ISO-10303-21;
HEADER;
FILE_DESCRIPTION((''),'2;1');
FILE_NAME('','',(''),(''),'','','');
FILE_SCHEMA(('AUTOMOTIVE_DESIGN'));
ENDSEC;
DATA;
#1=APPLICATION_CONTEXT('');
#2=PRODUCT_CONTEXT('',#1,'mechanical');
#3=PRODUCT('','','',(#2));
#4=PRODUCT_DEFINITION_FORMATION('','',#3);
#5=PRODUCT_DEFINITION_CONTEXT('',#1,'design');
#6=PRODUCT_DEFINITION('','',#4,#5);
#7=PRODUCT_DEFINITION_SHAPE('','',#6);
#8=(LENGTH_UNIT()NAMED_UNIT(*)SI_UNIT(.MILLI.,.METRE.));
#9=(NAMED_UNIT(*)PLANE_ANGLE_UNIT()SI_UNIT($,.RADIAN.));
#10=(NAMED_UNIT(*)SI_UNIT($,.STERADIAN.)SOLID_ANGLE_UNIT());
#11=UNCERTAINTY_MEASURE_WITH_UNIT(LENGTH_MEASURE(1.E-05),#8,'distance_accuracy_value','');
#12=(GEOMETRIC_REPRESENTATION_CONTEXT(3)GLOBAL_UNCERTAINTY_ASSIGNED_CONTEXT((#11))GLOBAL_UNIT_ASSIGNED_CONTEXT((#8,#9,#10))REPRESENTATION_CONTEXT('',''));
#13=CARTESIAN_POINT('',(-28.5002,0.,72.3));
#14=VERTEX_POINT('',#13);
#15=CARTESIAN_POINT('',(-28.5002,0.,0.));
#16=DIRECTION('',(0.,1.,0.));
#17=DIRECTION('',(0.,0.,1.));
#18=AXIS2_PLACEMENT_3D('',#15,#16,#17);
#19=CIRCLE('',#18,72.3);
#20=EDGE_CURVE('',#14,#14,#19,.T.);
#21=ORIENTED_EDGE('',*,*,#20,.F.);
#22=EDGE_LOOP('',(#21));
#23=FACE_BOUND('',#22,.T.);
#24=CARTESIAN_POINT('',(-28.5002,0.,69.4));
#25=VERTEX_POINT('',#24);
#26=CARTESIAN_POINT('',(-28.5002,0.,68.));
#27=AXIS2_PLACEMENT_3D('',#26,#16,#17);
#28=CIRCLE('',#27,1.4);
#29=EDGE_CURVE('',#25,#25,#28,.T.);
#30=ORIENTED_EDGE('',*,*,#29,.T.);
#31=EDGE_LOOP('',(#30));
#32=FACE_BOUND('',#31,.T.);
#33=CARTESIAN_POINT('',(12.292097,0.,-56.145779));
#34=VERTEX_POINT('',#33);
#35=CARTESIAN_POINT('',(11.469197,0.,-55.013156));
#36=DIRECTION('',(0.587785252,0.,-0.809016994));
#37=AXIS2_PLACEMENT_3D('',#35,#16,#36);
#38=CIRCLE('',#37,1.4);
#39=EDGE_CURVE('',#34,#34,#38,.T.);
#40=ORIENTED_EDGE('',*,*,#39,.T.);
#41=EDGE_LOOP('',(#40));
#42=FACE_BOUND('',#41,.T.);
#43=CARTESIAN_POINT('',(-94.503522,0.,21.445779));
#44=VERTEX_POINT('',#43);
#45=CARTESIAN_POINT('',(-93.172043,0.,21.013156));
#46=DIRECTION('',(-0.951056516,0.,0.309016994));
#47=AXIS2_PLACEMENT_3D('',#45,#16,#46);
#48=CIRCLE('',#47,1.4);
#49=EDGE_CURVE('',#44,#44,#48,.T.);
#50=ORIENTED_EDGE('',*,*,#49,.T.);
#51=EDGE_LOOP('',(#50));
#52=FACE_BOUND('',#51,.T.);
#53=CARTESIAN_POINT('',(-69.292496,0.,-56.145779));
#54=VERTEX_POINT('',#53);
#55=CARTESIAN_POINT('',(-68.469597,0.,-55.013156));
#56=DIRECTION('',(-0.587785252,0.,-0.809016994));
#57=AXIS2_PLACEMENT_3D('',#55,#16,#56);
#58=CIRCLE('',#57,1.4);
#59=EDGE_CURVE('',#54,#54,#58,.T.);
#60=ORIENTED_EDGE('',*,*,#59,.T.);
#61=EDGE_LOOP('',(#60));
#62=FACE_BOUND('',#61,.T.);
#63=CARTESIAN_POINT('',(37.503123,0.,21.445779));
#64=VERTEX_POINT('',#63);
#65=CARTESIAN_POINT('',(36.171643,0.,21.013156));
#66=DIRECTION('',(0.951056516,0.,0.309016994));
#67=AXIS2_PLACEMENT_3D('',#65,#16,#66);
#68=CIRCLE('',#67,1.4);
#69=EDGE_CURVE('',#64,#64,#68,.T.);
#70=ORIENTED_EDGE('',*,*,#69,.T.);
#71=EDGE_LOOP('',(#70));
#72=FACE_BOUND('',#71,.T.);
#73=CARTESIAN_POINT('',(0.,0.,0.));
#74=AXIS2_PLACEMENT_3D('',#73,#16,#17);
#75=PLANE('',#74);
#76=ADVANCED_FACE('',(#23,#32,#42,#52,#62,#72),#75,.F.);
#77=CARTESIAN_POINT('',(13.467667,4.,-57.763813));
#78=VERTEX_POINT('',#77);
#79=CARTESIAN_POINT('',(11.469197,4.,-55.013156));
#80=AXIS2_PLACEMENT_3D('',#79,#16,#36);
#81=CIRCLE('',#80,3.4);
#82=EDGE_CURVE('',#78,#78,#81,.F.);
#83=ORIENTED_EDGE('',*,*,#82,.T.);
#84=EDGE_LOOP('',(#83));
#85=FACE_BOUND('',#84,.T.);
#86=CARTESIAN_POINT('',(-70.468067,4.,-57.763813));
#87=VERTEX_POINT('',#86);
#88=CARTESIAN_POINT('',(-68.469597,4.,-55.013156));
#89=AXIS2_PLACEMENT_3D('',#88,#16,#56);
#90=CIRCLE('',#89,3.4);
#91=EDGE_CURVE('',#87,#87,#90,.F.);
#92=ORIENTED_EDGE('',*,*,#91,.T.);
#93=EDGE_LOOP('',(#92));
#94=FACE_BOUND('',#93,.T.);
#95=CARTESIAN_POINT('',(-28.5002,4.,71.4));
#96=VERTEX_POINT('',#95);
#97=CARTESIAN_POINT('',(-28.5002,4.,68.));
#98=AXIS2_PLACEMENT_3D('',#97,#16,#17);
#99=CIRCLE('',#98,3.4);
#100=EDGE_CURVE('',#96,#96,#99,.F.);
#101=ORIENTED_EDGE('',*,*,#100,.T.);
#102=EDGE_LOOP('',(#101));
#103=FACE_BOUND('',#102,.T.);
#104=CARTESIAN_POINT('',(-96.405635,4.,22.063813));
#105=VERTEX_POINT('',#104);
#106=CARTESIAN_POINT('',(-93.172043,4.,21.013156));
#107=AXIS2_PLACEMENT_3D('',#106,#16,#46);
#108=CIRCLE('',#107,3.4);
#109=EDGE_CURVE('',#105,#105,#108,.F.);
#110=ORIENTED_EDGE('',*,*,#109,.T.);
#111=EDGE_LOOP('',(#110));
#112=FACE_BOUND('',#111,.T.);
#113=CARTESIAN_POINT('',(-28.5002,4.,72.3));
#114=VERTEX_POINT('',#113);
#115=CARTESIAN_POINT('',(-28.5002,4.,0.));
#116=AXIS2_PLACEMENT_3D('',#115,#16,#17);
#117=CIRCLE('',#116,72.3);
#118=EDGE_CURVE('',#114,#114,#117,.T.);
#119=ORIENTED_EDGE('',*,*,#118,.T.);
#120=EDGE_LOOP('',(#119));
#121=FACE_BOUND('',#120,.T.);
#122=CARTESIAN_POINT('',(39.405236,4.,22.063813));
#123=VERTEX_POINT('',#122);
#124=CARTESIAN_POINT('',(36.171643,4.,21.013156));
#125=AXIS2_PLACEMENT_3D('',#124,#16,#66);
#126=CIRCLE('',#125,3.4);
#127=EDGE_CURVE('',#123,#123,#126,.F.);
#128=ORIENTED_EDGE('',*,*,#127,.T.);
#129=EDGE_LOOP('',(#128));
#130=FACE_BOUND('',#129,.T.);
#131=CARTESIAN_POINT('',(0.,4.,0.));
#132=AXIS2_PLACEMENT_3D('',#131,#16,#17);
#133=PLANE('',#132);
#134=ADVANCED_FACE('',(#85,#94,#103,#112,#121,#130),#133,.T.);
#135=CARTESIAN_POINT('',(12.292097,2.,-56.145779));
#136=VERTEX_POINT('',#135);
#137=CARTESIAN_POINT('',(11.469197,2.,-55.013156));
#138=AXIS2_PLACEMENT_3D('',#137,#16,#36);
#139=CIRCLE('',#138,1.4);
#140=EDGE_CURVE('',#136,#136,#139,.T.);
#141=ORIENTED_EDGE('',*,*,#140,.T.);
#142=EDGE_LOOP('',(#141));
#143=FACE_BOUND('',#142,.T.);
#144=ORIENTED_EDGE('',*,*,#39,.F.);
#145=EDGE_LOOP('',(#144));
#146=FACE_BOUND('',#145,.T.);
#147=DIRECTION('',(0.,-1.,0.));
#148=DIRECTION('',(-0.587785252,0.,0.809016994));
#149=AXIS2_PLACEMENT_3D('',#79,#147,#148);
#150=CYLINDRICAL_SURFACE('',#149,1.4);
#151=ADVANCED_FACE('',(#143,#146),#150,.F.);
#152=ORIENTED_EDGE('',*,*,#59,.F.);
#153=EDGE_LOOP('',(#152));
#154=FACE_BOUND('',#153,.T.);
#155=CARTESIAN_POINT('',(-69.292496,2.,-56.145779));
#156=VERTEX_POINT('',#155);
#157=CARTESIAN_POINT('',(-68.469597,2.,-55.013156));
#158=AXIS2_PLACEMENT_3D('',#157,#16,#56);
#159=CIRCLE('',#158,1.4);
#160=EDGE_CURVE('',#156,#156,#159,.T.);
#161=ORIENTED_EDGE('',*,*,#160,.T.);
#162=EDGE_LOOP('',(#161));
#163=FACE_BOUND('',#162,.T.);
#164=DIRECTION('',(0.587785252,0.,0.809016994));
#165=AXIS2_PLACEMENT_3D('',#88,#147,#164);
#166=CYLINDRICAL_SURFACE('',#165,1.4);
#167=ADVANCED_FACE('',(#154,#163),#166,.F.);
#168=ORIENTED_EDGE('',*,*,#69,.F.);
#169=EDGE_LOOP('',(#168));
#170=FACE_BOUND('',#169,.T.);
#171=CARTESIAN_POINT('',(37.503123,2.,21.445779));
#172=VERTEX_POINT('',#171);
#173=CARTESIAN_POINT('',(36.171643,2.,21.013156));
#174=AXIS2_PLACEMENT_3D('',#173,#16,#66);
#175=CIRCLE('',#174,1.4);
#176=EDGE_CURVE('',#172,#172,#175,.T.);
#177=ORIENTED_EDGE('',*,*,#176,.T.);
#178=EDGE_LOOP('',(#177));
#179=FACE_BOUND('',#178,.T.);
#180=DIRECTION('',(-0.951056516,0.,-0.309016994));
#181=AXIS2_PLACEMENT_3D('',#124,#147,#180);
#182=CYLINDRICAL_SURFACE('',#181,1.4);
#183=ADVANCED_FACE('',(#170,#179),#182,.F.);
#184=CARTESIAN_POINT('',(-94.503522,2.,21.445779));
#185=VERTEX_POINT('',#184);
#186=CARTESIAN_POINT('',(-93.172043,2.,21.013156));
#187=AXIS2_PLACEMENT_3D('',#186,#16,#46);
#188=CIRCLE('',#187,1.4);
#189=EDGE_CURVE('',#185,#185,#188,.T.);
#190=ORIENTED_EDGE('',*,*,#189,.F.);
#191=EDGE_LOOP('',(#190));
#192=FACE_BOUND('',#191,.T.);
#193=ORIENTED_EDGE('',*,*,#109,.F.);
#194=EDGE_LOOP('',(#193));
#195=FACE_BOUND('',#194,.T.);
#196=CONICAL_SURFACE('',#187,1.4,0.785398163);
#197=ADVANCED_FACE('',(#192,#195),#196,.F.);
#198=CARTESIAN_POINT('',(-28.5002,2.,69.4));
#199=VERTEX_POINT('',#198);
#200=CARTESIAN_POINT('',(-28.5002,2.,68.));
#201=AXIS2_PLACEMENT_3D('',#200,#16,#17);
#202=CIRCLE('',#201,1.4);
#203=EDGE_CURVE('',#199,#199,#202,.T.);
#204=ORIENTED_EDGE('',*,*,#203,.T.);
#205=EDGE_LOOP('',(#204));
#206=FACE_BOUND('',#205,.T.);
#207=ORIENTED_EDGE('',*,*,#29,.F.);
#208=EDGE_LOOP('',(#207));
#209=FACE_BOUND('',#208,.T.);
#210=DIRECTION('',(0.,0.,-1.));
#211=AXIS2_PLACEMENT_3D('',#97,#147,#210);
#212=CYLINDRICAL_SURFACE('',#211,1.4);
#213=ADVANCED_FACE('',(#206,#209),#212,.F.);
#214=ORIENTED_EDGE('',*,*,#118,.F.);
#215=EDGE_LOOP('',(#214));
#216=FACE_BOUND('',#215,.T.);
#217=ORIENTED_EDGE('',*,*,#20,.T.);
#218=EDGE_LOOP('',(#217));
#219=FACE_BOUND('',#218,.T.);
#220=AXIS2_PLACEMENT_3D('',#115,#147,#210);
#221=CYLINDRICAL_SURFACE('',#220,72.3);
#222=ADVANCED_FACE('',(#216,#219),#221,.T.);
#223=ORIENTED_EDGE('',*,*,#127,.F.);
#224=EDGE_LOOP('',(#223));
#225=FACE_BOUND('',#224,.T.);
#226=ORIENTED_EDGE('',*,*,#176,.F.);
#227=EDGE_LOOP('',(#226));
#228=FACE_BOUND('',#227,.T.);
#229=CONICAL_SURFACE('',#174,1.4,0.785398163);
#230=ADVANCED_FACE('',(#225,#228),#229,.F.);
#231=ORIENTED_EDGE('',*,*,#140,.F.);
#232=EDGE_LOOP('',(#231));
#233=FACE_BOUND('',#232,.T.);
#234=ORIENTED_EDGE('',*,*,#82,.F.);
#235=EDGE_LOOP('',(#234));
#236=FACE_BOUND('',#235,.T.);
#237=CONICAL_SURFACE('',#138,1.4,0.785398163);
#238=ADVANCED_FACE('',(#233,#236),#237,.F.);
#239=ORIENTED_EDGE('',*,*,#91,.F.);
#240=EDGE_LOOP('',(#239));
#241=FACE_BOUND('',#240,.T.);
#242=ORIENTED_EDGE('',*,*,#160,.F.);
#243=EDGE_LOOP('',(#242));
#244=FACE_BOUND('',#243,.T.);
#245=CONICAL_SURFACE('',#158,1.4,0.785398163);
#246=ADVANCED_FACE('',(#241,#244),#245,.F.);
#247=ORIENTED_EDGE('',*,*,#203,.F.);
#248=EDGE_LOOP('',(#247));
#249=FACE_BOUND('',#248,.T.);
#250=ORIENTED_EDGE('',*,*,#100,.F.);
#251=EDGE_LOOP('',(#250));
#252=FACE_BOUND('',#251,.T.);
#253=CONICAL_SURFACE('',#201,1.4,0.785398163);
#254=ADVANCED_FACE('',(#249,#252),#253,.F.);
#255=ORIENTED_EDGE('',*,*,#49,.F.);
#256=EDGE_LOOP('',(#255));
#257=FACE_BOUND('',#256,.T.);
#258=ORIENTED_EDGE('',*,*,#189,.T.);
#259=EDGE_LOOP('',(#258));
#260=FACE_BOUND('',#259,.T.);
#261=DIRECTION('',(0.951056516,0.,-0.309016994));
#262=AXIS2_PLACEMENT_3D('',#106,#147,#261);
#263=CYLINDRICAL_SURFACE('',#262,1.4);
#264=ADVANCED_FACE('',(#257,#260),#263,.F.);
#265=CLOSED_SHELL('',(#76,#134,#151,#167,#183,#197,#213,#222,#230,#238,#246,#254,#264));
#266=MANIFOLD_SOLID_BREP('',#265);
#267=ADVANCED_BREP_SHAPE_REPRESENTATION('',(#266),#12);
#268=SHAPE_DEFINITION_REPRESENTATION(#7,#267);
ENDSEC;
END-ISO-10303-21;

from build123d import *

# Parameters (mm, degrees)
SKETCH1_R           = 72.3
SKETCH1_R_2         = 1.4
BOSS_EXTRUDE1_DEPTH = 4
CHAMFER1_SIZE       = 2


# Read off the part's stored shape, not the designer's step: CirPattern4
with BuildPart() as part:
    # Sketch1 → Boss-Extrude1 (new body)
    with BuildSketch(Plane(origin=(0, 0, 0), x_dir=(-1, 0, 0), z_dir=(0, 1, 0))):
        with Locations(Location((28.500199727, 0, 0), (0, 0, 90))):
            Circle(SKETCH1_R)
        with Locations(Location((28.500199727, 68, 0), (0, 0, 90))):
            Circle(SKETCH1_R_2, mode=Mode.SUBTRACT)
    extrude(amount=BOSS_EXTRUDE1_DEPTH)

    # Chamfer1
    chamfer1_edges = [part.edges().sort_by_distance(p)[0] for p in [
        (-28.500199727, 4, 66.6),
    ]]
    chamfer(chamfer1_edges, length=CHAMFER1_SIZE)

    # CirPattern4 outline → CirPattern4 (revolve, cut)
    with BuildSketch(Plane(origin=(-93.172042835, 0, 21.013155617), x_dir=(1, 0, 0), z_dir=(0, 0, 1))):
        Polygon((3.4, 4), (0, 4), (0, 0), (1.4, 0), (1.4, 2), align=None)
    revolve(axis=Axis((-93.172042835, 0, 21.013155617), (0, 1, 0)), mode=Mode.SUBTRACT)

    # CirPattern4 2 outline → CirPattern4 2 (revolve, cut)
    with BuildSketch(Plane(origin=(-68.469596883, 0, -55.013155617), x_dir=(1, 0, 0), z_dir=(0, 0, 1))):
        Polygon((3.4, 4), (0, 4), (0, 0), (1.4, 0), (1.4, 2), align=None)
    revolve(axis=Axis((-68.469596883, 0, -55.013155617), (0, 1, 0)), mode=Mode.SUBTRACT)

    # CirPattern4 3 outline → CirPattern4 3 (revolve, cut)
    with BuildSketch(Plane(origin=(11.469197429, 0, -55.013155617), x_dir=(1, 0, 0), z_dir=(0, 0, 1))):
        Polygon((3.4, 4), (0, 4), (0, 0), (1.4, 0), (1.4, 2), align=None)
    revolve(axis=Axis((11.469197429, 0, -55.013155617), (0, 1, 0)), mode=Mode.SUBTRACT)

    # CirPattern4 4 outline → CirPattern4 4 (revolve, cut)
    with BuildSketch(Plane(origin=(36.171643381, 0, 21.013155617), x_dir=(1, 0, 0), z_dir=(0, 0, 1))):
        Polygon((3.4, 4), (0, 4), (0, 0), (1.4, 0), (1.4, 2), align=None)
    revolve(axis=Axis((36.171643381, 0, 21.013155617), (0, 1, 0)), mode=Mode.SUBTRACT)


solid = part.part
